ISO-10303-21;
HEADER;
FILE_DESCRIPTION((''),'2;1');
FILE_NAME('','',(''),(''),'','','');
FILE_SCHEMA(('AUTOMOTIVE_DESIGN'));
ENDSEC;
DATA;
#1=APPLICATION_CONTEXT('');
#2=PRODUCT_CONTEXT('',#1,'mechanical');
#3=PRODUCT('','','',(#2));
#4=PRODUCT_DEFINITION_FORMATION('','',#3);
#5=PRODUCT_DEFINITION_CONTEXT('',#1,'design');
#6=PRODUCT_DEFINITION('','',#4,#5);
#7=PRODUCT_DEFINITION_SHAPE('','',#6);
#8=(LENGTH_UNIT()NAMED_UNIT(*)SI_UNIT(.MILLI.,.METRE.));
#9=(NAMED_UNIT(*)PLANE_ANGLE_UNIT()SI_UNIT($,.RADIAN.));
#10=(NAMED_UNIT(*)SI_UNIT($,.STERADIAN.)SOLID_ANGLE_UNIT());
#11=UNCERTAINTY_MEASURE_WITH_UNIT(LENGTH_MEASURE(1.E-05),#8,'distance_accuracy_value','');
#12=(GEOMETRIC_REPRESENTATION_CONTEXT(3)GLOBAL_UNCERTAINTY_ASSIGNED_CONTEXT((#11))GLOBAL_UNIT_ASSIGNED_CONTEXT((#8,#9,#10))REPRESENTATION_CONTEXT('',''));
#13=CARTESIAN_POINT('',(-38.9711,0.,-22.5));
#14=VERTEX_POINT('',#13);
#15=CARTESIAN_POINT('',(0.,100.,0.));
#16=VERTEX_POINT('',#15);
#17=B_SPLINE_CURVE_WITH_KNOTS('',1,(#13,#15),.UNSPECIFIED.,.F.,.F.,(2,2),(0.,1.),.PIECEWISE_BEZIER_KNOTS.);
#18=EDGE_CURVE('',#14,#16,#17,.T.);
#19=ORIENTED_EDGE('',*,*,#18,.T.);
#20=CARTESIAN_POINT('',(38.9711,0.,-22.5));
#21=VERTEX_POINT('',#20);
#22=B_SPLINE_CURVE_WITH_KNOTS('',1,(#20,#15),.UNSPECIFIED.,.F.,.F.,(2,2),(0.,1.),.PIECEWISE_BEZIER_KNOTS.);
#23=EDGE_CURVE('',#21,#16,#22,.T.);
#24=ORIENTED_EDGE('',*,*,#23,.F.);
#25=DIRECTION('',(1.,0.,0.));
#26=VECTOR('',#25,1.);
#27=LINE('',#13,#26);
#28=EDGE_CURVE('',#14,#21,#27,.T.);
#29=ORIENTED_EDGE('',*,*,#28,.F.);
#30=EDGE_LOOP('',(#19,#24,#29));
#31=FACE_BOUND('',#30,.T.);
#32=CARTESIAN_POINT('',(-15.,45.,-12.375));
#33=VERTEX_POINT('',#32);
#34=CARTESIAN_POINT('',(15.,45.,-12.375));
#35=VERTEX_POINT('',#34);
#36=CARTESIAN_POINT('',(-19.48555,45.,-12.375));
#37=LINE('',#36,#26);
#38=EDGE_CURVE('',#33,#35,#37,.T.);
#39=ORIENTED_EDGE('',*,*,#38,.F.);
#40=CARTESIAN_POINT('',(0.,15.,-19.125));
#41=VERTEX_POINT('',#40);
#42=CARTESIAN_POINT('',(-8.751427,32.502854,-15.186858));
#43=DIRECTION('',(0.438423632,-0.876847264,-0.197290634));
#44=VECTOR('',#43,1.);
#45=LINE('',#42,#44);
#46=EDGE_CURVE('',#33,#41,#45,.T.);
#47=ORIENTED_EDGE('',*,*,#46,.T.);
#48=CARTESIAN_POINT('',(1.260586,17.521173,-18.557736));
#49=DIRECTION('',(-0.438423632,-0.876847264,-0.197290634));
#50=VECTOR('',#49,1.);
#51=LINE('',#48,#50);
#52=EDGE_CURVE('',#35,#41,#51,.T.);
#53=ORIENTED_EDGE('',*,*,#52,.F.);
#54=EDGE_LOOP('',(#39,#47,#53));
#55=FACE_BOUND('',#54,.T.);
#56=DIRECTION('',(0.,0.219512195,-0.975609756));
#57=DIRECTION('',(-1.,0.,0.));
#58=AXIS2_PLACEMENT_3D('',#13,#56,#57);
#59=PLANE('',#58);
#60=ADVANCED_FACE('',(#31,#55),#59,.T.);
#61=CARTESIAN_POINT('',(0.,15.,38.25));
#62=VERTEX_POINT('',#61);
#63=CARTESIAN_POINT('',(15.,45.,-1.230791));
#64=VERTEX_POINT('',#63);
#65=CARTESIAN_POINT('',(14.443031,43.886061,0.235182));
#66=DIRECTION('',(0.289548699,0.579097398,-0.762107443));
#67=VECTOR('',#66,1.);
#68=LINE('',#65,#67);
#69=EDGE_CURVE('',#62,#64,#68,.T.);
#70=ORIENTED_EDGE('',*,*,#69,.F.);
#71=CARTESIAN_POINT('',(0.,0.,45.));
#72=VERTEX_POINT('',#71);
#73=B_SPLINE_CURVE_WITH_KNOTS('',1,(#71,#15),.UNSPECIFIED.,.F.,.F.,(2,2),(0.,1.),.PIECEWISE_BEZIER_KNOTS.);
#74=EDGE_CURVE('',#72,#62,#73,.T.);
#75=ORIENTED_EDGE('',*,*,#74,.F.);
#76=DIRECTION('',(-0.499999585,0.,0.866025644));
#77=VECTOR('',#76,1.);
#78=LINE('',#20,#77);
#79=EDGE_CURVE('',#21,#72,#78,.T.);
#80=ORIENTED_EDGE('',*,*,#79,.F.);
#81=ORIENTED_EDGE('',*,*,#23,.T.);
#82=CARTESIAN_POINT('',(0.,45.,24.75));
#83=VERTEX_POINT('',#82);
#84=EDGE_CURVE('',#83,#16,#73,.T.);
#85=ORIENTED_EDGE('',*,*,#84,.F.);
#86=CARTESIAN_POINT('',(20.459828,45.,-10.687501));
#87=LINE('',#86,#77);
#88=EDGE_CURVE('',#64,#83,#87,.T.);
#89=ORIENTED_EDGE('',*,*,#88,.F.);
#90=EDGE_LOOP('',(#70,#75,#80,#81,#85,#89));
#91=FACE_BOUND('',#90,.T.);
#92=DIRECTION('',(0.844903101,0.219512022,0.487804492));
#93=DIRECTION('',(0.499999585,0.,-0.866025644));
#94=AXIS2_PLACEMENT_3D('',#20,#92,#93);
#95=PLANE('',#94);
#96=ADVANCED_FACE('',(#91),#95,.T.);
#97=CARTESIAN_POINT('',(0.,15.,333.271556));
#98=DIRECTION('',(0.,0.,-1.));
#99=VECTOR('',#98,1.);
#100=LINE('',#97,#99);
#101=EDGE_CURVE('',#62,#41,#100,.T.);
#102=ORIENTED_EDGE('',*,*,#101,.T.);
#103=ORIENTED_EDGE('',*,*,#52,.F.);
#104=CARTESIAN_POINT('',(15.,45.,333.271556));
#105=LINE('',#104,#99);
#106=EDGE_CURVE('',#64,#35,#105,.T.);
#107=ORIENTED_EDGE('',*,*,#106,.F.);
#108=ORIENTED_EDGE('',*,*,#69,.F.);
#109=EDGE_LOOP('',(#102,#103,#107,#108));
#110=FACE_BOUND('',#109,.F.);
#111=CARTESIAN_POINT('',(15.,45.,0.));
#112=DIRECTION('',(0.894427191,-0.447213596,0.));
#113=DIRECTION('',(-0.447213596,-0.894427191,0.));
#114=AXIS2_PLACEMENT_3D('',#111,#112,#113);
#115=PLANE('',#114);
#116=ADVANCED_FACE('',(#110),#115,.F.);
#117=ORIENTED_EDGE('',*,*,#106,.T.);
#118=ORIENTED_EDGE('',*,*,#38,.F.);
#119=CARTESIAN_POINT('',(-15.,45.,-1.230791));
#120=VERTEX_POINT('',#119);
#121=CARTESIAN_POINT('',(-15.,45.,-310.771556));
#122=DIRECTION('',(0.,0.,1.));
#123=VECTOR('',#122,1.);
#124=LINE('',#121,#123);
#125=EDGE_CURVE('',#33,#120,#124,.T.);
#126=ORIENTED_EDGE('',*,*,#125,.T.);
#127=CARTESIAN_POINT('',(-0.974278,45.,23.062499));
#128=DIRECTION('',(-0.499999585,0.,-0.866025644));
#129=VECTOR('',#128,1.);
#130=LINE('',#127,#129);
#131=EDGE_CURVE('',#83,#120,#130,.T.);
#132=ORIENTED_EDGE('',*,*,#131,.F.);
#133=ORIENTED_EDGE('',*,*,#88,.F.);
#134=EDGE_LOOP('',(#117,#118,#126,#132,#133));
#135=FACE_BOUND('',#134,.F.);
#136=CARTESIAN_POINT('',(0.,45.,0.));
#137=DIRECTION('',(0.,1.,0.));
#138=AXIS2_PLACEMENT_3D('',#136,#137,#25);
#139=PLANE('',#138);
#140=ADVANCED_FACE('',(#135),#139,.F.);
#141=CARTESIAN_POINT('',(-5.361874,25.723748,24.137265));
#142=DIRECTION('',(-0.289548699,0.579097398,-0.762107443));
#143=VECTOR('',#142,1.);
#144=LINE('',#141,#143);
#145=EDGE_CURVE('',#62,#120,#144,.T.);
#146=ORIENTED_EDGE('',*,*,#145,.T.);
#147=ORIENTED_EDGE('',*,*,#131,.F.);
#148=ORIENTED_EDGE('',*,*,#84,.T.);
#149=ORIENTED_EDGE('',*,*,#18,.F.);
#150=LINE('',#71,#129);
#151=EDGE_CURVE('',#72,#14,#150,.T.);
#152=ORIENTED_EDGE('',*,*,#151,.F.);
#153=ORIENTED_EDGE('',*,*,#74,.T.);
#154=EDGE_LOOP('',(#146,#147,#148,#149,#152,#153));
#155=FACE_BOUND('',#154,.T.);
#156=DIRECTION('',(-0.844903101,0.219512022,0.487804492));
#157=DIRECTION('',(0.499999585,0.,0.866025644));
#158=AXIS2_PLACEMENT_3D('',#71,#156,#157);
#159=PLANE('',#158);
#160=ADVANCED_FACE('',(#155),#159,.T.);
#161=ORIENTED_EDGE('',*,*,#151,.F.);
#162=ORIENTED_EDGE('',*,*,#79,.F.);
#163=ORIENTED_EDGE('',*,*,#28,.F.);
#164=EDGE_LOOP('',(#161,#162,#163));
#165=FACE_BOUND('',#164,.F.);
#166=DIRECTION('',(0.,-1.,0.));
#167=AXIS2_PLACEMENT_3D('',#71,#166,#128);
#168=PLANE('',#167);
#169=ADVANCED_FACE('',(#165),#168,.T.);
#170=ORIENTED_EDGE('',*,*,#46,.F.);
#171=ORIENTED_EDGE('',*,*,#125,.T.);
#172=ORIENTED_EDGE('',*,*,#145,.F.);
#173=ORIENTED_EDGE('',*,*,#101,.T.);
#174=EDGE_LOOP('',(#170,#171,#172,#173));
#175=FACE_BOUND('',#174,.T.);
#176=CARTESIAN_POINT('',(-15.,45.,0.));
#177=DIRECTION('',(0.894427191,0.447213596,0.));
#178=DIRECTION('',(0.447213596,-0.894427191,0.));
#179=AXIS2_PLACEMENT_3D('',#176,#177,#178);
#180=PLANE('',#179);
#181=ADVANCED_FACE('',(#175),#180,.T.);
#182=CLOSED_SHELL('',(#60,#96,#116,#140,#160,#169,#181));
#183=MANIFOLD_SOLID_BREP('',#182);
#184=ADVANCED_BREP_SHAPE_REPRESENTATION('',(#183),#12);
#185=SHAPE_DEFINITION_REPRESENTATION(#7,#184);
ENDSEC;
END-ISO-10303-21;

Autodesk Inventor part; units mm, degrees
ref_plane "YZ Plane" through (0, 0, 0) normal (1, 0, 0) x (0, 1, 0)
ref_plane "XY Plane" through (0, 0, 0) normal (0, 0, 1) x (1, 0, 0)
sketch "Эскиз1" plane through (0, 0, 0) normal (0, 1, 0) x (-1, 0, 0)
  line L0 (0, 45) -> (38.9711, -22.5)
  line L1 (38.9711, -22.5) -> (-38.9711, -22.5)
  line L2 (-38.9711, -22.5) -> (0, 45)
  point P0 (0, 0)
  point P1 (0, 0)
ref_plane "РабПлоскость2" through (0, 100, 0) normal (0, 1, 0) x (-1, 0, 0)
ref_plane "РабПлоскость1" through (0, 0, 0) normal (0, 1, 0) x (-1, 0, 0)
sketch "Эскиз2" plane through (0, 100, 0) normal (0, 1, 0) x (-1, 0, 0)
  point P0 (0, 0)
  point P1 (0, 0)
loft "Лофт1" add profiles "Эскиз1" section 2 point at (0, 100, 0)
sketch "Эскиз3" plane through (0, 0, 0) normal (0, 0, 1) x (1, 0, 0)
  point P0 (0, 0)
sketch "Эскиз4" plane through (0, 0, 0) normal (0, 0, 1) x (1, 0, 0)
  line L0 (0, 45) -> (15, 45)
  line L1 (15, 45) -> (-15, 45)
  line L2 (-15, 45) -> (0, 15)
  line L3 (15, 45) -> (0, 15)
  point P0 (0, 0)
extrude "Выдавливание1" cut sketch "Эскиз4" along normal through all both and the other way through all
properties part number "Задача №2"
